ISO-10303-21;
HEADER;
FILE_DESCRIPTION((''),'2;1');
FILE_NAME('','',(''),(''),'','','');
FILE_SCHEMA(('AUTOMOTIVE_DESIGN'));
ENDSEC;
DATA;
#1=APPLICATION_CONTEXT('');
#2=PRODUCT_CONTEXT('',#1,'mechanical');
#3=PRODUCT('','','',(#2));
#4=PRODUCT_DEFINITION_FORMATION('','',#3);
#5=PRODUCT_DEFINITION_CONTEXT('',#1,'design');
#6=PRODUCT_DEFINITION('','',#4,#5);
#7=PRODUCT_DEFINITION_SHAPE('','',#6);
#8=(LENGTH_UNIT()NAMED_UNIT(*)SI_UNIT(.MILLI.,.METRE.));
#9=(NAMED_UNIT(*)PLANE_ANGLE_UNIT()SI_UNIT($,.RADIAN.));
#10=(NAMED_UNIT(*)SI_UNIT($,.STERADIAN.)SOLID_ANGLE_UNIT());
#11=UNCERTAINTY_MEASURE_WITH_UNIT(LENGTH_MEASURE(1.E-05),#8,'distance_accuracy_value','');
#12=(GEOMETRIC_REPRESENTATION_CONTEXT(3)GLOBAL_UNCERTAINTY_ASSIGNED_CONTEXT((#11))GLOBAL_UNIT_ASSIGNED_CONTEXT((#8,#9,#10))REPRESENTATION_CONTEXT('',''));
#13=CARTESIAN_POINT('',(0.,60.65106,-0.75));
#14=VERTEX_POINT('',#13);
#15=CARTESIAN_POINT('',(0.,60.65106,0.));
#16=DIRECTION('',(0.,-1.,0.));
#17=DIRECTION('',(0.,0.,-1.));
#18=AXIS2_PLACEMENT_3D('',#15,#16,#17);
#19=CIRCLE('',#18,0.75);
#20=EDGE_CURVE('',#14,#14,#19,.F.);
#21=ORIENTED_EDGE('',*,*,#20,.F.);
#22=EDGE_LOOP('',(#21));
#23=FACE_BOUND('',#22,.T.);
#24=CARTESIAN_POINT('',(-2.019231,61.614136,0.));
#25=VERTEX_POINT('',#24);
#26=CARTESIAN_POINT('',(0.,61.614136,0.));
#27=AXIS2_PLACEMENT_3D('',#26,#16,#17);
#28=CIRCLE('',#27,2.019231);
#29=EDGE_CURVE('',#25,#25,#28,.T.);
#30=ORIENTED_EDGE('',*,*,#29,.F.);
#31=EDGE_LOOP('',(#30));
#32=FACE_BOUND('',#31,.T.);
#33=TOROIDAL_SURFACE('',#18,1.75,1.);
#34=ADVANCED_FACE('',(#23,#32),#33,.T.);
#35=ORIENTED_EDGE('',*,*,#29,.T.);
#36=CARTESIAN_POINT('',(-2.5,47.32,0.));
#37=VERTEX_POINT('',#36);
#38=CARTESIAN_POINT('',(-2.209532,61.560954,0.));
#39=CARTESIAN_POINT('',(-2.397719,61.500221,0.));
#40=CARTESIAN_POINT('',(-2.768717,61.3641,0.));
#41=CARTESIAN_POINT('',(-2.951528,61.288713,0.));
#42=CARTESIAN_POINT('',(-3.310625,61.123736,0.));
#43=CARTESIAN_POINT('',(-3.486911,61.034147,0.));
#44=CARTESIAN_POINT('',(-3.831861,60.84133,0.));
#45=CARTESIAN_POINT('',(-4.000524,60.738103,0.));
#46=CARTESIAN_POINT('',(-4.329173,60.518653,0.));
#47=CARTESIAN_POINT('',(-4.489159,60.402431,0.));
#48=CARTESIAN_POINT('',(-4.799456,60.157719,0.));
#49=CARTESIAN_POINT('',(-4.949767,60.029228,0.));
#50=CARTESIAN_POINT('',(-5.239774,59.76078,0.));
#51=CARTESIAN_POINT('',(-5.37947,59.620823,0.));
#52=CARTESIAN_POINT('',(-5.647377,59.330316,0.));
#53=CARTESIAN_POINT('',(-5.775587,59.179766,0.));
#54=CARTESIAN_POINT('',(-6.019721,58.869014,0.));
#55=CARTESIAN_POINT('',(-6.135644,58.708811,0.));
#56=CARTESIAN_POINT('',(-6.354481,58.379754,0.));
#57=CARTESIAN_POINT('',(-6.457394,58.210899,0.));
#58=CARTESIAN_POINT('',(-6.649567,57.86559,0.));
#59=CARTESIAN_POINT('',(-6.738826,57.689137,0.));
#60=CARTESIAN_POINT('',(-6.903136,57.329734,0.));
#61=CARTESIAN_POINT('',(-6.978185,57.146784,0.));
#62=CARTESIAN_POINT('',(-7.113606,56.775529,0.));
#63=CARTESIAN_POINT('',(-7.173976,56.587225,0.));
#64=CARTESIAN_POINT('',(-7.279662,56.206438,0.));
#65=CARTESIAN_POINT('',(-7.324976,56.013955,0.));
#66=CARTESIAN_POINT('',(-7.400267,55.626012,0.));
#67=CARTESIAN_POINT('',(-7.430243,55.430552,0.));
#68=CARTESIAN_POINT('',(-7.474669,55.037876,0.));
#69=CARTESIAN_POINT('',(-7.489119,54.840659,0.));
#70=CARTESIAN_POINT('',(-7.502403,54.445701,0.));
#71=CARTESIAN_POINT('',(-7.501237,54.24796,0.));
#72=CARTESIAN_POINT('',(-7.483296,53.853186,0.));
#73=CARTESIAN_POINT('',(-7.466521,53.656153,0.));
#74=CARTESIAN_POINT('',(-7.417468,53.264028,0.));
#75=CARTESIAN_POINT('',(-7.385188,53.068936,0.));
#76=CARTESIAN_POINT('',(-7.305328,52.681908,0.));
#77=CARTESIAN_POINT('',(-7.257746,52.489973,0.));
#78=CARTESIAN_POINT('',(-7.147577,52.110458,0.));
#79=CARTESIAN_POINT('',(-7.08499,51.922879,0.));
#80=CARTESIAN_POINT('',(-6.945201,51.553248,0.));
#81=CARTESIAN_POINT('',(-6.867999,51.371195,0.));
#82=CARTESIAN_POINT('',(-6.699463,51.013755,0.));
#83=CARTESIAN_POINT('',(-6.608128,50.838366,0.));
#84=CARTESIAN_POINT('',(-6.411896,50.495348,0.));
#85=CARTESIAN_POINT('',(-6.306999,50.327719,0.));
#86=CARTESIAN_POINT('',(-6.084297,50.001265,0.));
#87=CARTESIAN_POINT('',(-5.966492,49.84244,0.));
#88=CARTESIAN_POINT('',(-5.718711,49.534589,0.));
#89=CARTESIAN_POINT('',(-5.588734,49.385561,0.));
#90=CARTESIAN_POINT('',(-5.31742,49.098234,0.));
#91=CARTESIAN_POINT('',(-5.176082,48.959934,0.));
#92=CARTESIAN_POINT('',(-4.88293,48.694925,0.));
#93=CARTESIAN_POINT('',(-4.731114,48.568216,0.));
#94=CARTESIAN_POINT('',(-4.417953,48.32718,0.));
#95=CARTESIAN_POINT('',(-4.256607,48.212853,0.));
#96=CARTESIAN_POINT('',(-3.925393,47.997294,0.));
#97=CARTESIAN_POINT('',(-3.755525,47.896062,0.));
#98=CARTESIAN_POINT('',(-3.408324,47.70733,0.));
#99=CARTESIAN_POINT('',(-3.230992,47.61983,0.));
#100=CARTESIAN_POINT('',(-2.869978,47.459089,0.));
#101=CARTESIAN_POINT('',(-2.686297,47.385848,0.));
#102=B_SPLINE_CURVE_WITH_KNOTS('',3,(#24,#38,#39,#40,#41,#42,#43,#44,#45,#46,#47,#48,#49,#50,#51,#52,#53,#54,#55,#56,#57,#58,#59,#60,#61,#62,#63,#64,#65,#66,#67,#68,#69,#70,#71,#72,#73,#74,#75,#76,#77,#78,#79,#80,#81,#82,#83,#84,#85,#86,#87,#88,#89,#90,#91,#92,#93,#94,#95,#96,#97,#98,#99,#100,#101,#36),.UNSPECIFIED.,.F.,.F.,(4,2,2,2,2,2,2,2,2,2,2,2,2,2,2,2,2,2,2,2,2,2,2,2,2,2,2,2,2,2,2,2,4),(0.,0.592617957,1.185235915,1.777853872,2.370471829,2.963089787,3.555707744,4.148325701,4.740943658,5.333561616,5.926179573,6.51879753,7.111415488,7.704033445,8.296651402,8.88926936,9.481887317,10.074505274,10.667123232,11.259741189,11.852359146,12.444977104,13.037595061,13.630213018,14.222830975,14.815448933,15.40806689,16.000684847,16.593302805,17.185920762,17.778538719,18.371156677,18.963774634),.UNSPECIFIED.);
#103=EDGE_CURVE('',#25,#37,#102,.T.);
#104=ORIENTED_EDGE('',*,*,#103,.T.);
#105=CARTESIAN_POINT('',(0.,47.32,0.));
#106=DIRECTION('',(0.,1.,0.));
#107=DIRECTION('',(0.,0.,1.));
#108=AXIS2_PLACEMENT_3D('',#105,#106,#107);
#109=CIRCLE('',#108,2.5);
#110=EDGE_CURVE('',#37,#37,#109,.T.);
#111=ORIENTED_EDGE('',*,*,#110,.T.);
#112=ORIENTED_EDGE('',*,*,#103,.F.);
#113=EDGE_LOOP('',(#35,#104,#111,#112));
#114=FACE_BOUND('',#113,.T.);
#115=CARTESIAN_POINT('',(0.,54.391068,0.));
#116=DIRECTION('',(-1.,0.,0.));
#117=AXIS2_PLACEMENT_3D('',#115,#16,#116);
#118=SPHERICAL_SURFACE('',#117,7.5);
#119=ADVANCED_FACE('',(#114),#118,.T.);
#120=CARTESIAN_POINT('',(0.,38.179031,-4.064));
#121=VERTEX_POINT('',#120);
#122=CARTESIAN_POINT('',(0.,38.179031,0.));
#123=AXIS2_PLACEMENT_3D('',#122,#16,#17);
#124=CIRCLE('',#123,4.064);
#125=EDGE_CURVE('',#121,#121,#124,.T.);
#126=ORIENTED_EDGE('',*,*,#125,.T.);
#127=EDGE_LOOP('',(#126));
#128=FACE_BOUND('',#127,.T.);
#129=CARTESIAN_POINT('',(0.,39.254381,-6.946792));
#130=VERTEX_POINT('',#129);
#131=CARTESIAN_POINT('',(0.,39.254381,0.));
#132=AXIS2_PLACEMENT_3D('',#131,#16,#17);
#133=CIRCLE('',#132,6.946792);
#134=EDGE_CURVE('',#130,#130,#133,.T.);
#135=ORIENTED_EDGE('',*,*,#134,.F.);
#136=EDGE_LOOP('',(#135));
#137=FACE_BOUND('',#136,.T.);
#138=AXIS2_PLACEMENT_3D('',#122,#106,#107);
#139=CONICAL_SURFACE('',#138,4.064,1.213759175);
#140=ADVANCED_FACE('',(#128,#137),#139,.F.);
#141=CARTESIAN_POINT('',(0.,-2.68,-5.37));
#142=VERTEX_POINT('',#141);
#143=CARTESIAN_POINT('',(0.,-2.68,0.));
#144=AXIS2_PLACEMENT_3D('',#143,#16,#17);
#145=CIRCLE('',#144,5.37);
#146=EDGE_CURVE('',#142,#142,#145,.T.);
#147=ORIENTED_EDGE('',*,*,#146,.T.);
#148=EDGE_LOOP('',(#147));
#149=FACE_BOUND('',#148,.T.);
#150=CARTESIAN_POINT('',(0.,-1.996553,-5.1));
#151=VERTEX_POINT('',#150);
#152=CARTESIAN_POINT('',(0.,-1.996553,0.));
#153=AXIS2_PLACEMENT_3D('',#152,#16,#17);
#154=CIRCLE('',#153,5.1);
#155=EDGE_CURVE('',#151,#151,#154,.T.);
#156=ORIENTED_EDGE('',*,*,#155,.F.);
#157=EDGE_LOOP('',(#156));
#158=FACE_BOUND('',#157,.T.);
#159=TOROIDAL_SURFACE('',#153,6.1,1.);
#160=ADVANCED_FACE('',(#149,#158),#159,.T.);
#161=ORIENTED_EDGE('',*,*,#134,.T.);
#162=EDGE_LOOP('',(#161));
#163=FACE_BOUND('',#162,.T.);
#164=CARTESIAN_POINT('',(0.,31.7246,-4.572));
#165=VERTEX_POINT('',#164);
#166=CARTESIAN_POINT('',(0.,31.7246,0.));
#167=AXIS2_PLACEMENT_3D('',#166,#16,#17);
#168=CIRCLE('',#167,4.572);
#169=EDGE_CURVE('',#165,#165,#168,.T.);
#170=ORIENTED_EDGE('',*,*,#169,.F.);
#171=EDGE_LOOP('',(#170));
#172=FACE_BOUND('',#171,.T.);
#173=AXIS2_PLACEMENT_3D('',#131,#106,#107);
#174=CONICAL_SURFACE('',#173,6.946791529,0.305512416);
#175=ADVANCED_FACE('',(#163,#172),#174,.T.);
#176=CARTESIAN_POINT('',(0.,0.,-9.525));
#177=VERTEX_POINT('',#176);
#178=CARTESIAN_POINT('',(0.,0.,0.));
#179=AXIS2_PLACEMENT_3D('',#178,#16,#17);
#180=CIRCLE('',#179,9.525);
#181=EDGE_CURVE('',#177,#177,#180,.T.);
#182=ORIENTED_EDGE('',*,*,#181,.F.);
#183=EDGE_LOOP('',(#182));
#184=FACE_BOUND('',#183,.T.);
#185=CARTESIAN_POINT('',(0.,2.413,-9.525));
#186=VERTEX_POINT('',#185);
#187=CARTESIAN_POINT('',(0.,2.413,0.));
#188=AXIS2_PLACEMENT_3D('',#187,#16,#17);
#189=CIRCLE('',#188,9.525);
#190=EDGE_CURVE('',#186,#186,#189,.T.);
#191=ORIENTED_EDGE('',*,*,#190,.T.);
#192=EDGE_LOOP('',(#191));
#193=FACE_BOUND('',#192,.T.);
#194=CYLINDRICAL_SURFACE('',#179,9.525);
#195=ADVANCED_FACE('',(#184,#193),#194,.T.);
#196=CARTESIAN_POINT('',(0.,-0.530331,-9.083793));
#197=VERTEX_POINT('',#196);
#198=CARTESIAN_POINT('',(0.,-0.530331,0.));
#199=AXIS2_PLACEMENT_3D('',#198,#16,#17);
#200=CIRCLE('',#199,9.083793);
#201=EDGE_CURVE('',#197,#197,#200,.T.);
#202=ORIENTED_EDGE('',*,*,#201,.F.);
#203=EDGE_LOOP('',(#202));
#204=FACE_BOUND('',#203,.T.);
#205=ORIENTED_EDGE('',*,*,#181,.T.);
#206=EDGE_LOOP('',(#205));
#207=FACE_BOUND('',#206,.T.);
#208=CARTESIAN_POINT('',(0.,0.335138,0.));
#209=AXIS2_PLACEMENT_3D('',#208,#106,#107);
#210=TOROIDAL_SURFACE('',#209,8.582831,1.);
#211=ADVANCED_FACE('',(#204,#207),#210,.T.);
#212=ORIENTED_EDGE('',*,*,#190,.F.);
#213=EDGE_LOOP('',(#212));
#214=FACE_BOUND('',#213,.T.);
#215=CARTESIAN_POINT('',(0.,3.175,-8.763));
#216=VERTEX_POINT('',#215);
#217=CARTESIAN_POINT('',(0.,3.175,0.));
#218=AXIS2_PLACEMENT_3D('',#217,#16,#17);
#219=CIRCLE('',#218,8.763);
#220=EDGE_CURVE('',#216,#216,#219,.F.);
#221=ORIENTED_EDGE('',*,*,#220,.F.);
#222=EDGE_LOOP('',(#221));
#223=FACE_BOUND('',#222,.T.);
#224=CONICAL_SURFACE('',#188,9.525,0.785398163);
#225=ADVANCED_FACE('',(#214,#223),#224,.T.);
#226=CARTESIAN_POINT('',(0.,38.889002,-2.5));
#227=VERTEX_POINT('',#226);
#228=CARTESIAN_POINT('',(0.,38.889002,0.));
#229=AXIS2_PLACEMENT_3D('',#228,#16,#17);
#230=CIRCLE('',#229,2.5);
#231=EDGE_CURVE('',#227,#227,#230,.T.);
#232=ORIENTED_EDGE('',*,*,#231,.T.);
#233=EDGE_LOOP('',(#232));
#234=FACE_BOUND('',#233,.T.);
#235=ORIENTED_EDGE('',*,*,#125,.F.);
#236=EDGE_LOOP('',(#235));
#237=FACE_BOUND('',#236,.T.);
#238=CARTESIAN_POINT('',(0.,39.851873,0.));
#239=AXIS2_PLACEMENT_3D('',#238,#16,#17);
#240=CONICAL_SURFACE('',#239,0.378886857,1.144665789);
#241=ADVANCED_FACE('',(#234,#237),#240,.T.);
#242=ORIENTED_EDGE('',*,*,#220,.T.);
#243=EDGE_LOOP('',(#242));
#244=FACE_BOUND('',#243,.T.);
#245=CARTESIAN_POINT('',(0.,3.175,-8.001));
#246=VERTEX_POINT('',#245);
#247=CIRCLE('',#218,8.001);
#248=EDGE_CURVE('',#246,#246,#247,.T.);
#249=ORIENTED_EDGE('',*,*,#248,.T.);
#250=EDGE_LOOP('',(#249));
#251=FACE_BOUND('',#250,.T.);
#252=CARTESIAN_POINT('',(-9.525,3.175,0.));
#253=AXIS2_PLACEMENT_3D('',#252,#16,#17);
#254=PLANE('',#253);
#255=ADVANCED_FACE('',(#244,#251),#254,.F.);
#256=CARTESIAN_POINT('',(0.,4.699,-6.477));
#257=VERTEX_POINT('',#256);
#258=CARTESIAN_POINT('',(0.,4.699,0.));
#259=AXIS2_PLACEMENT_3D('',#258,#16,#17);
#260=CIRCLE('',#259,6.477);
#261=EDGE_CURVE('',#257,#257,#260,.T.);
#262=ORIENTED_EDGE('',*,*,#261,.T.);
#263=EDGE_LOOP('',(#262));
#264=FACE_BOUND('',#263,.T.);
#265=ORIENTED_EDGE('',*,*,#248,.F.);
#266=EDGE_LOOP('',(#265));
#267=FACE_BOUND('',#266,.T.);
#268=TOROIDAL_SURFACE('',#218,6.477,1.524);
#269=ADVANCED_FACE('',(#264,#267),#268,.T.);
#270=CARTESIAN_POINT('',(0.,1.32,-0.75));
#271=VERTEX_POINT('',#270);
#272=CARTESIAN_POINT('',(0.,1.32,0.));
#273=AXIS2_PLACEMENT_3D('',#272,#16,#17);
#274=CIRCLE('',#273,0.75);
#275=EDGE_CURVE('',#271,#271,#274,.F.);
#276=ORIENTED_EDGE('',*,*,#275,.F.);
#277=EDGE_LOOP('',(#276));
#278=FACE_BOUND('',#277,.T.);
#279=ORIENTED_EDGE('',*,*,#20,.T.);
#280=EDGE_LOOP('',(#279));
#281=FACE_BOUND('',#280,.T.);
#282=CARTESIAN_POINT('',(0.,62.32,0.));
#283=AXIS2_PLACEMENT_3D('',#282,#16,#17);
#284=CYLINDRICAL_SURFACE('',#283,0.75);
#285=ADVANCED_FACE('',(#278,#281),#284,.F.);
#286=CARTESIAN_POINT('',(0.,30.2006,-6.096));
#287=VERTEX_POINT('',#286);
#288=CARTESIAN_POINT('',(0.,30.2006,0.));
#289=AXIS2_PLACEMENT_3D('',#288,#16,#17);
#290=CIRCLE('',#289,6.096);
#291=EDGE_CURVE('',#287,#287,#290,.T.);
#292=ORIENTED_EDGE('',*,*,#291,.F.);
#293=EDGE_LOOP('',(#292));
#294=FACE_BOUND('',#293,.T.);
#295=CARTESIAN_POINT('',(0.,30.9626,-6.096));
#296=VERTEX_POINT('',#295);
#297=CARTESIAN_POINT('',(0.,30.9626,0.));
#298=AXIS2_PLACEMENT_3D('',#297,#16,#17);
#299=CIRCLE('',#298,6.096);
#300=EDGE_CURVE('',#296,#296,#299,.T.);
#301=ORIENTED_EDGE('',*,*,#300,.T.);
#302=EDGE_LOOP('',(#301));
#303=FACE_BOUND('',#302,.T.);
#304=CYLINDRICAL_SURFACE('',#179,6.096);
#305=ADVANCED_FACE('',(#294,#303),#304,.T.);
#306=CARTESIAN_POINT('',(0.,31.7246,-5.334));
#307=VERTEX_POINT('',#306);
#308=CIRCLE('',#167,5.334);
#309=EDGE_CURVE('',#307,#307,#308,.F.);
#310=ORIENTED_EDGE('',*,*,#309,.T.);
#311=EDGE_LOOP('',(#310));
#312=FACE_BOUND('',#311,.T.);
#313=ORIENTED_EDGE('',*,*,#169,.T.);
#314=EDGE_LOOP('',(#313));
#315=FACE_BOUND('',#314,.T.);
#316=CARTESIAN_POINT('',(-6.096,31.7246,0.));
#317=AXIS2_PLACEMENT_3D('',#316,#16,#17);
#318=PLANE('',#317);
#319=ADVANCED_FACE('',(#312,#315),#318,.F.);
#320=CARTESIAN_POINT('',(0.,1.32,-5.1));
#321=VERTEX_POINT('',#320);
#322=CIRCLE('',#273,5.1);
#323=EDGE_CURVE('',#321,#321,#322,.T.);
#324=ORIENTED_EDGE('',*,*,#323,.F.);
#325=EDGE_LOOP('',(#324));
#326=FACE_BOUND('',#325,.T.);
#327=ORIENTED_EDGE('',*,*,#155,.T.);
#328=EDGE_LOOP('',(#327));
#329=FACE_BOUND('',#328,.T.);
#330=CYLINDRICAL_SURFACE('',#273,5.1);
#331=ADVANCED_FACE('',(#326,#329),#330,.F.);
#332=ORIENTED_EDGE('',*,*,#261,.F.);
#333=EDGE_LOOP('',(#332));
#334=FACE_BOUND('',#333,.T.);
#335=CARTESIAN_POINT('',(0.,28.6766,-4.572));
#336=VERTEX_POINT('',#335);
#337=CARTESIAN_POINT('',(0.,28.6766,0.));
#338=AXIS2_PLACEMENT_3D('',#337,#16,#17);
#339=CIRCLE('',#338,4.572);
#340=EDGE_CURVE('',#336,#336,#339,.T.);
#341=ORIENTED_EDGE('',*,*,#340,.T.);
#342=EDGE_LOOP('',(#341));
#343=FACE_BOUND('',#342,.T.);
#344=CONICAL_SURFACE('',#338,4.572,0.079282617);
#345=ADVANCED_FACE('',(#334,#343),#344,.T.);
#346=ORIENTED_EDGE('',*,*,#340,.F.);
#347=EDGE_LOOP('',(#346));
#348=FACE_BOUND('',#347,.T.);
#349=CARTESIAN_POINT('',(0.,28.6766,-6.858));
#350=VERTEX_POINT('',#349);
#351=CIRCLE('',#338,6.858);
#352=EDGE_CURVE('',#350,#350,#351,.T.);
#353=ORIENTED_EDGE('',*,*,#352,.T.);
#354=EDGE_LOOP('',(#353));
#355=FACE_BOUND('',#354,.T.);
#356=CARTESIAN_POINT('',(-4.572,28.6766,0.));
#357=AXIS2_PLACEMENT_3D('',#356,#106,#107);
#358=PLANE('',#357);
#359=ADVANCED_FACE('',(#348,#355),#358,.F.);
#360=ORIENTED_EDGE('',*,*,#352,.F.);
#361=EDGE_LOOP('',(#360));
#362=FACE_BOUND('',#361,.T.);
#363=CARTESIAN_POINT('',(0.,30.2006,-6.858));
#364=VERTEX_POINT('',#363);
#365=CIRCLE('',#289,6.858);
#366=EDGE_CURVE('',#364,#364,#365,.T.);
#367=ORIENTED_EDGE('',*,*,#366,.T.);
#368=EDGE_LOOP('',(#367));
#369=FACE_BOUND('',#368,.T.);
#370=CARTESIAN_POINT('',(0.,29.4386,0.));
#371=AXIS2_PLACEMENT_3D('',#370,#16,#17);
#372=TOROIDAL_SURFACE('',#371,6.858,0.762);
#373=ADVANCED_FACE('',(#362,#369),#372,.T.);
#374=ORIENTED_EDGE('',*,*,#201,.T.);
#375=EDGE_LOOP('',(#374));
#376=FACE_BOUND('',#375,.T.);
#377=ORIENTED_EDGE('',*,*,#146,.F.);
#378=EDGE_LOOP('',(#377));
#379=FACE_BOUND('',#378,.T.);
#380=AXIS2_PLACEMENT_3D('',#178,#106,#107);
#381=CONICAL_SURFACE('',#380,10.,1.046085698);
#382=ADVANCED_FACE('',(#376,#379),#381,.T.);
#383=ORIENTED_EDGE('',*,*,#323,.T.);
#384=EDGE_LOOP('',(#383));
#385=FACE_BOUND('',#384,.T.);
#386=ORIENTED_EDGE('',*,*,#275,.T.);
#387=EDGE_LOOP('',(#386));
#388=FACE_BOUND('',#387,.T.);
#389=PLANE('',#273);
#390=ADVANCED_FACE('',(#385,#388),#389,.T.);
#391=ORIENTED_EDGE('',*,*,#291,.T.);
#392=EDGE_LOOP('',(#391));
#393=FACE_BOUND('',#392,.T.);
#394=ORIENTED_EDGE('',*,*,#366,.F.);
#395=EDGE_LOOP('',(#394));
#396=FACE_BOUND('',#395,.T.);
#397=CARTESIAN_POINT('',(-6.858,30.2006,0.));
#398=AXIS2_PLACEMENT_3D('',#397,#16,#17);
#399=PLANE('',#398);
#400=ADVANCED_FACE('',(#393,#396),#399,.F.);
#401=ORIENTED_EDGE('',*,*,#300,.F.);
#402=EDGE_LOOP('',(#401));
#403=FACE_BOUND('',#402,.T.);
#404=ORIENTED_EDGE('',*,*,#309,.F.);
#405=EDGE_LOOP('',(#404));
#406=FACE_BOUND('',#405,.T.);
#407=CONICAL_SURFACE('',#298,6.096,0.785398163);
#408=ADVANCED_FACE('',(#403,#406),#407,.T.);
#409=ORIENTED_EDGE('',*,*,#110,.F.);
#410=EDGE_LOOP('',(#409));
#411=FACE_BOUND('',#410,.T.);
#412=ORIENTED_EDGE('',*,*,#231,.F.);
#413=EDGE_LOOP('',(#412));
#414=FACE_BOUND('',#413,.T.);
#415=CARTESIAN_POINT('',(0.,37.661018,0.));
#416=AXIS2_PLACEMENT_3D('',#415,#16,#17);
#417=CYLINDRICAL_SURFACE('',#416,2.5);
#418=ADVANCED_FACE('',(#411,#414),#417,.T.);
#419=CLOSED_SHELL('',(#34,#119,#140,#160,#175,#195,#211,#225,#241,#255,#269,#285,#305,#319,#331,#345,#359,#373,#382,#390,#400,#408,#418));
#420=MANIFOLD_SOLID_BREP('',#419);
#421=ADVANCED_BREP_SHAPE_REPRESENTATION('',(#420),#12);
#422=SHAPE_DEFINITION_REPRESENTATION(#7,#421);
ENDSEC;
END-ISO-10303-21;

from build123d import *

# Parameters (mm, degrees)
FILLET1_R          = 1.524
CHAMFER1_SIZE      = 0.762
CHAMFER2_SIZE      = 0.762
SKETCH5_ONE_SIDE_W = 2.5
SKETCH5_ONE_SIDE_H = 12.494819280662249
SKETCH6_R          = 0.75
CUT_EXTRUDE1_DEPTH = 65
SKETCH7_R          = 5.1000000000000005
CUT_EXTRUDE2_DEPTH = 4
FILLET2_R          = 1


# Some blends are built 0.0001 mm under size
with BuildPart() as part:
    # Sketch2 → Revolve1 (revolve)
    with BuildSketch(Plane.XY, mode=Mode.PRIVATE) as revolve1_sk:
        with BuildLine():
            Line((0, 0), (0, 41.275))
            ThreePointArc((0, 41.275), (-0.736350012431866, 40.709042493331395), (-0.37888685669750244, 39.85187312123777))
            Line((-0.37888685669750244, 39.85187312123777), (-4.064000000000009, 38.1790309038726))
            Line((-4.064000000000009, 38.1790309038726), (-6.946791529476407, 39.25438129728364))
            Line((-6.946791529476407, 39.25438129728364), (-4.571999999999998, 31.72459999999999))
            Line((-4.571999999999998, 31.72459999999999), (-6.095999999999998, 31.7246))
            Line((-6.095999999999998, 31.7246), (-6.095999999999999, 30.200599999999998))
            Line((-6.095999999999999, 30.200599999999998), (-6.857999999999998, 30.2006))
            ThreePointArc((-6.857999999999998, 30.2006), (-7.619999999999999, 29.4386), (-6.858, 28.676600000000004))
            Line((-6.858, 28.676600000000004), (-4.571999999999998, 28.6766))
            Line((-4.571999999999998, 28.6766), (-6.477000000000001, 4.698999999999998))
            Line((-6.477000000000001, 4.698999999999998), (-8.001000000000001, 4.698999999999998))
            Line((-8.001000000000001, 4.698999999999998), (-8.001000000000001, 3.1749999999999985))
            Line((-8.001000000000001, 3.1749999999999985), (-9.525, 3.1749999999999985))
            Line((-9.525, 3.1749999999999985), (-9.525, -1.17e-15))
            Line((-9.525, -1.17e-15), (0, 0))
        make_face()
    revolve(revolve1_sk.sketch.rotate(Axis((0, 0, 0), (0, 1, 0)), 270), axis=Axis((0, 0, 0), (0, 1, 0)))

    # Fillet1
    fillet1_edges = [part.edges().sort_by_distance(p)[0] for p in [
        (-2.76e-15, 4.698999999999998, 8.001000000000001),
    ]]
    fillet(fillet1_edges, radius=FILLET1_R - 0.0001)  # a hair under: the kernel refuses the full size

    # Chamfer1
    chamfer1_edges = [part.edges().sort_by_distance(p)[0] for p in [
        (-3.28e-15, 3.1749999999999985, 9.525),
    ]]
    chamfer(chamfer1_edges, length=CHAMFER1_SIZE)

    # Chamfer2
    chamfer2_edges = [part.edges().sort_by_distance(p)[0] for p in [
        (-2.1e-15, 31.7246, 6.095999999999998),
    ]]
    chamfer(chamfer2_edges, length=CHAMFER2_SIZE)

    # Sketch5 one side → Revolve2 (revolve)
    with BuildSketch(Plane.XY, mode=Mode.PRIVATE) as revolve2_sk:
        with BuildLine():
            Line((0, 46.891067811865476), (0, 61.891067811865476))
            ThreePointArc((2.0363e-13, 61.891067811865476), (-7.5, 54.391067811865476), (2.0512e-13, 46.891067811865476))
        make_face()
        Polygon((0, 0), (-10, -1.22e-15), (-5.37, -2.68), (0, -2.68), align=None)
        with Locations((-1.25, 41.07259035966888)):
            Rectangle(SKETCH5_ONE_SIDE_W, SKETCH5_ONE_SIDE_H)
    revolve(revolve2_sk.sketch.rotate(Axis((0, 37.66101754504278, 0), (0, 1, 0)), 270), axis=Axis((0, 37.66101754504278, 0), (0, 1, 0)))

    # Sketch6 → Cut-Extrude1 (cut)
    with BuildSketch(Plane.XZ.offset(2.68)):
        with Locations(Location((0, 0, 0), (0, 0, 270))):
            Circle(SKETCH6_R)
    extrude(amount=-CUT_EXTRUDE1_DEPTH, mode=Mode.SUBTRACT)

    # Sketch7 → Cut-Extrude2 (cut)
    with BuildSketch(Plane.XZ.offset(2.68)):
        with Locations(Location((0, 0, 0), (0, 0, 270))):
            Circle(SKETCH7_R)
    extrude(amount=-CUT_EXTRUDE2_DEPTH, mode=Mode.SUBTRACT)

    # Fillet2
    # the kernel refuses this fillet: 1 mm, written as the material it takes off along each edge
    with BuildSketch(Plane(origin=(0, 0, 0), x_dir=(2.2e-16, 0, -1), z_dir=(1, 0, 2.2e-16))) as fillet2_piece_1:
        with BuildLine():
            CenterArc((8.582830845240167, 0.335137708739466), FILLET2_R, 300.06370450944223, 40.355383333849545)
            Line((9.083793429310001, -0.5303312331423757), (10, 0))
            Line((10, 0), (9.525, -1.44e-15))
        make_face()
    revolve(axis=Axis((0, 0, 0), (0, 1, 0)), mode=Mode.SUBTRACT)
    with BuildSketch(Plane(origin=(0, 61.85347359016512, 2.2e-16), x_dir=(2.2e-16, 0, -1), z_dir=(-1, 0, -2.2e-16))) as fillet2_piece_2:
        with BuildLine():
            CenterArc((1.7500000000000002, 1.2024137655251934), FILLET2_R, 180, 105.6184982756485)
            Line((0.7500000000000002, 1.2024137655251934), (0.75, 0))
            ThreePointArc((0.75, 0), (1.3897771193257187, 0.09229590404412846), (2.019230769230769, 0.23933807125219886))
        make_face()
    revolve(axis=Axis((0, 61.85347359016512, 2.2e-16), (0, -1, 0)), mode=Mode.SUBTRACT)
    with BuildSketch(Plane(origin=(0, -2.68, 0), x_dir=(-1.8e-16, 0, -1), z_dir=(-1, 0, 1.8e-16))) as fillet2_piece_3:
        with BuildLine():
            CenterArc((6.1000000000000005, -0.683447144993671), FILLET2_R, 136.88639405410134, 43.113605945898655)
            Line((5.37, -4.4e-16), (5.1000000000000005, 0))
            Line((5.1000000000000005, 0), (5.1000000000000005, -0.683447144993671))
        make_face()
    revolve(axis=Axis((0, -2.68, 0), (0, -1, 0)), mode=Mode.SUBTRACT)


solid = part.part
